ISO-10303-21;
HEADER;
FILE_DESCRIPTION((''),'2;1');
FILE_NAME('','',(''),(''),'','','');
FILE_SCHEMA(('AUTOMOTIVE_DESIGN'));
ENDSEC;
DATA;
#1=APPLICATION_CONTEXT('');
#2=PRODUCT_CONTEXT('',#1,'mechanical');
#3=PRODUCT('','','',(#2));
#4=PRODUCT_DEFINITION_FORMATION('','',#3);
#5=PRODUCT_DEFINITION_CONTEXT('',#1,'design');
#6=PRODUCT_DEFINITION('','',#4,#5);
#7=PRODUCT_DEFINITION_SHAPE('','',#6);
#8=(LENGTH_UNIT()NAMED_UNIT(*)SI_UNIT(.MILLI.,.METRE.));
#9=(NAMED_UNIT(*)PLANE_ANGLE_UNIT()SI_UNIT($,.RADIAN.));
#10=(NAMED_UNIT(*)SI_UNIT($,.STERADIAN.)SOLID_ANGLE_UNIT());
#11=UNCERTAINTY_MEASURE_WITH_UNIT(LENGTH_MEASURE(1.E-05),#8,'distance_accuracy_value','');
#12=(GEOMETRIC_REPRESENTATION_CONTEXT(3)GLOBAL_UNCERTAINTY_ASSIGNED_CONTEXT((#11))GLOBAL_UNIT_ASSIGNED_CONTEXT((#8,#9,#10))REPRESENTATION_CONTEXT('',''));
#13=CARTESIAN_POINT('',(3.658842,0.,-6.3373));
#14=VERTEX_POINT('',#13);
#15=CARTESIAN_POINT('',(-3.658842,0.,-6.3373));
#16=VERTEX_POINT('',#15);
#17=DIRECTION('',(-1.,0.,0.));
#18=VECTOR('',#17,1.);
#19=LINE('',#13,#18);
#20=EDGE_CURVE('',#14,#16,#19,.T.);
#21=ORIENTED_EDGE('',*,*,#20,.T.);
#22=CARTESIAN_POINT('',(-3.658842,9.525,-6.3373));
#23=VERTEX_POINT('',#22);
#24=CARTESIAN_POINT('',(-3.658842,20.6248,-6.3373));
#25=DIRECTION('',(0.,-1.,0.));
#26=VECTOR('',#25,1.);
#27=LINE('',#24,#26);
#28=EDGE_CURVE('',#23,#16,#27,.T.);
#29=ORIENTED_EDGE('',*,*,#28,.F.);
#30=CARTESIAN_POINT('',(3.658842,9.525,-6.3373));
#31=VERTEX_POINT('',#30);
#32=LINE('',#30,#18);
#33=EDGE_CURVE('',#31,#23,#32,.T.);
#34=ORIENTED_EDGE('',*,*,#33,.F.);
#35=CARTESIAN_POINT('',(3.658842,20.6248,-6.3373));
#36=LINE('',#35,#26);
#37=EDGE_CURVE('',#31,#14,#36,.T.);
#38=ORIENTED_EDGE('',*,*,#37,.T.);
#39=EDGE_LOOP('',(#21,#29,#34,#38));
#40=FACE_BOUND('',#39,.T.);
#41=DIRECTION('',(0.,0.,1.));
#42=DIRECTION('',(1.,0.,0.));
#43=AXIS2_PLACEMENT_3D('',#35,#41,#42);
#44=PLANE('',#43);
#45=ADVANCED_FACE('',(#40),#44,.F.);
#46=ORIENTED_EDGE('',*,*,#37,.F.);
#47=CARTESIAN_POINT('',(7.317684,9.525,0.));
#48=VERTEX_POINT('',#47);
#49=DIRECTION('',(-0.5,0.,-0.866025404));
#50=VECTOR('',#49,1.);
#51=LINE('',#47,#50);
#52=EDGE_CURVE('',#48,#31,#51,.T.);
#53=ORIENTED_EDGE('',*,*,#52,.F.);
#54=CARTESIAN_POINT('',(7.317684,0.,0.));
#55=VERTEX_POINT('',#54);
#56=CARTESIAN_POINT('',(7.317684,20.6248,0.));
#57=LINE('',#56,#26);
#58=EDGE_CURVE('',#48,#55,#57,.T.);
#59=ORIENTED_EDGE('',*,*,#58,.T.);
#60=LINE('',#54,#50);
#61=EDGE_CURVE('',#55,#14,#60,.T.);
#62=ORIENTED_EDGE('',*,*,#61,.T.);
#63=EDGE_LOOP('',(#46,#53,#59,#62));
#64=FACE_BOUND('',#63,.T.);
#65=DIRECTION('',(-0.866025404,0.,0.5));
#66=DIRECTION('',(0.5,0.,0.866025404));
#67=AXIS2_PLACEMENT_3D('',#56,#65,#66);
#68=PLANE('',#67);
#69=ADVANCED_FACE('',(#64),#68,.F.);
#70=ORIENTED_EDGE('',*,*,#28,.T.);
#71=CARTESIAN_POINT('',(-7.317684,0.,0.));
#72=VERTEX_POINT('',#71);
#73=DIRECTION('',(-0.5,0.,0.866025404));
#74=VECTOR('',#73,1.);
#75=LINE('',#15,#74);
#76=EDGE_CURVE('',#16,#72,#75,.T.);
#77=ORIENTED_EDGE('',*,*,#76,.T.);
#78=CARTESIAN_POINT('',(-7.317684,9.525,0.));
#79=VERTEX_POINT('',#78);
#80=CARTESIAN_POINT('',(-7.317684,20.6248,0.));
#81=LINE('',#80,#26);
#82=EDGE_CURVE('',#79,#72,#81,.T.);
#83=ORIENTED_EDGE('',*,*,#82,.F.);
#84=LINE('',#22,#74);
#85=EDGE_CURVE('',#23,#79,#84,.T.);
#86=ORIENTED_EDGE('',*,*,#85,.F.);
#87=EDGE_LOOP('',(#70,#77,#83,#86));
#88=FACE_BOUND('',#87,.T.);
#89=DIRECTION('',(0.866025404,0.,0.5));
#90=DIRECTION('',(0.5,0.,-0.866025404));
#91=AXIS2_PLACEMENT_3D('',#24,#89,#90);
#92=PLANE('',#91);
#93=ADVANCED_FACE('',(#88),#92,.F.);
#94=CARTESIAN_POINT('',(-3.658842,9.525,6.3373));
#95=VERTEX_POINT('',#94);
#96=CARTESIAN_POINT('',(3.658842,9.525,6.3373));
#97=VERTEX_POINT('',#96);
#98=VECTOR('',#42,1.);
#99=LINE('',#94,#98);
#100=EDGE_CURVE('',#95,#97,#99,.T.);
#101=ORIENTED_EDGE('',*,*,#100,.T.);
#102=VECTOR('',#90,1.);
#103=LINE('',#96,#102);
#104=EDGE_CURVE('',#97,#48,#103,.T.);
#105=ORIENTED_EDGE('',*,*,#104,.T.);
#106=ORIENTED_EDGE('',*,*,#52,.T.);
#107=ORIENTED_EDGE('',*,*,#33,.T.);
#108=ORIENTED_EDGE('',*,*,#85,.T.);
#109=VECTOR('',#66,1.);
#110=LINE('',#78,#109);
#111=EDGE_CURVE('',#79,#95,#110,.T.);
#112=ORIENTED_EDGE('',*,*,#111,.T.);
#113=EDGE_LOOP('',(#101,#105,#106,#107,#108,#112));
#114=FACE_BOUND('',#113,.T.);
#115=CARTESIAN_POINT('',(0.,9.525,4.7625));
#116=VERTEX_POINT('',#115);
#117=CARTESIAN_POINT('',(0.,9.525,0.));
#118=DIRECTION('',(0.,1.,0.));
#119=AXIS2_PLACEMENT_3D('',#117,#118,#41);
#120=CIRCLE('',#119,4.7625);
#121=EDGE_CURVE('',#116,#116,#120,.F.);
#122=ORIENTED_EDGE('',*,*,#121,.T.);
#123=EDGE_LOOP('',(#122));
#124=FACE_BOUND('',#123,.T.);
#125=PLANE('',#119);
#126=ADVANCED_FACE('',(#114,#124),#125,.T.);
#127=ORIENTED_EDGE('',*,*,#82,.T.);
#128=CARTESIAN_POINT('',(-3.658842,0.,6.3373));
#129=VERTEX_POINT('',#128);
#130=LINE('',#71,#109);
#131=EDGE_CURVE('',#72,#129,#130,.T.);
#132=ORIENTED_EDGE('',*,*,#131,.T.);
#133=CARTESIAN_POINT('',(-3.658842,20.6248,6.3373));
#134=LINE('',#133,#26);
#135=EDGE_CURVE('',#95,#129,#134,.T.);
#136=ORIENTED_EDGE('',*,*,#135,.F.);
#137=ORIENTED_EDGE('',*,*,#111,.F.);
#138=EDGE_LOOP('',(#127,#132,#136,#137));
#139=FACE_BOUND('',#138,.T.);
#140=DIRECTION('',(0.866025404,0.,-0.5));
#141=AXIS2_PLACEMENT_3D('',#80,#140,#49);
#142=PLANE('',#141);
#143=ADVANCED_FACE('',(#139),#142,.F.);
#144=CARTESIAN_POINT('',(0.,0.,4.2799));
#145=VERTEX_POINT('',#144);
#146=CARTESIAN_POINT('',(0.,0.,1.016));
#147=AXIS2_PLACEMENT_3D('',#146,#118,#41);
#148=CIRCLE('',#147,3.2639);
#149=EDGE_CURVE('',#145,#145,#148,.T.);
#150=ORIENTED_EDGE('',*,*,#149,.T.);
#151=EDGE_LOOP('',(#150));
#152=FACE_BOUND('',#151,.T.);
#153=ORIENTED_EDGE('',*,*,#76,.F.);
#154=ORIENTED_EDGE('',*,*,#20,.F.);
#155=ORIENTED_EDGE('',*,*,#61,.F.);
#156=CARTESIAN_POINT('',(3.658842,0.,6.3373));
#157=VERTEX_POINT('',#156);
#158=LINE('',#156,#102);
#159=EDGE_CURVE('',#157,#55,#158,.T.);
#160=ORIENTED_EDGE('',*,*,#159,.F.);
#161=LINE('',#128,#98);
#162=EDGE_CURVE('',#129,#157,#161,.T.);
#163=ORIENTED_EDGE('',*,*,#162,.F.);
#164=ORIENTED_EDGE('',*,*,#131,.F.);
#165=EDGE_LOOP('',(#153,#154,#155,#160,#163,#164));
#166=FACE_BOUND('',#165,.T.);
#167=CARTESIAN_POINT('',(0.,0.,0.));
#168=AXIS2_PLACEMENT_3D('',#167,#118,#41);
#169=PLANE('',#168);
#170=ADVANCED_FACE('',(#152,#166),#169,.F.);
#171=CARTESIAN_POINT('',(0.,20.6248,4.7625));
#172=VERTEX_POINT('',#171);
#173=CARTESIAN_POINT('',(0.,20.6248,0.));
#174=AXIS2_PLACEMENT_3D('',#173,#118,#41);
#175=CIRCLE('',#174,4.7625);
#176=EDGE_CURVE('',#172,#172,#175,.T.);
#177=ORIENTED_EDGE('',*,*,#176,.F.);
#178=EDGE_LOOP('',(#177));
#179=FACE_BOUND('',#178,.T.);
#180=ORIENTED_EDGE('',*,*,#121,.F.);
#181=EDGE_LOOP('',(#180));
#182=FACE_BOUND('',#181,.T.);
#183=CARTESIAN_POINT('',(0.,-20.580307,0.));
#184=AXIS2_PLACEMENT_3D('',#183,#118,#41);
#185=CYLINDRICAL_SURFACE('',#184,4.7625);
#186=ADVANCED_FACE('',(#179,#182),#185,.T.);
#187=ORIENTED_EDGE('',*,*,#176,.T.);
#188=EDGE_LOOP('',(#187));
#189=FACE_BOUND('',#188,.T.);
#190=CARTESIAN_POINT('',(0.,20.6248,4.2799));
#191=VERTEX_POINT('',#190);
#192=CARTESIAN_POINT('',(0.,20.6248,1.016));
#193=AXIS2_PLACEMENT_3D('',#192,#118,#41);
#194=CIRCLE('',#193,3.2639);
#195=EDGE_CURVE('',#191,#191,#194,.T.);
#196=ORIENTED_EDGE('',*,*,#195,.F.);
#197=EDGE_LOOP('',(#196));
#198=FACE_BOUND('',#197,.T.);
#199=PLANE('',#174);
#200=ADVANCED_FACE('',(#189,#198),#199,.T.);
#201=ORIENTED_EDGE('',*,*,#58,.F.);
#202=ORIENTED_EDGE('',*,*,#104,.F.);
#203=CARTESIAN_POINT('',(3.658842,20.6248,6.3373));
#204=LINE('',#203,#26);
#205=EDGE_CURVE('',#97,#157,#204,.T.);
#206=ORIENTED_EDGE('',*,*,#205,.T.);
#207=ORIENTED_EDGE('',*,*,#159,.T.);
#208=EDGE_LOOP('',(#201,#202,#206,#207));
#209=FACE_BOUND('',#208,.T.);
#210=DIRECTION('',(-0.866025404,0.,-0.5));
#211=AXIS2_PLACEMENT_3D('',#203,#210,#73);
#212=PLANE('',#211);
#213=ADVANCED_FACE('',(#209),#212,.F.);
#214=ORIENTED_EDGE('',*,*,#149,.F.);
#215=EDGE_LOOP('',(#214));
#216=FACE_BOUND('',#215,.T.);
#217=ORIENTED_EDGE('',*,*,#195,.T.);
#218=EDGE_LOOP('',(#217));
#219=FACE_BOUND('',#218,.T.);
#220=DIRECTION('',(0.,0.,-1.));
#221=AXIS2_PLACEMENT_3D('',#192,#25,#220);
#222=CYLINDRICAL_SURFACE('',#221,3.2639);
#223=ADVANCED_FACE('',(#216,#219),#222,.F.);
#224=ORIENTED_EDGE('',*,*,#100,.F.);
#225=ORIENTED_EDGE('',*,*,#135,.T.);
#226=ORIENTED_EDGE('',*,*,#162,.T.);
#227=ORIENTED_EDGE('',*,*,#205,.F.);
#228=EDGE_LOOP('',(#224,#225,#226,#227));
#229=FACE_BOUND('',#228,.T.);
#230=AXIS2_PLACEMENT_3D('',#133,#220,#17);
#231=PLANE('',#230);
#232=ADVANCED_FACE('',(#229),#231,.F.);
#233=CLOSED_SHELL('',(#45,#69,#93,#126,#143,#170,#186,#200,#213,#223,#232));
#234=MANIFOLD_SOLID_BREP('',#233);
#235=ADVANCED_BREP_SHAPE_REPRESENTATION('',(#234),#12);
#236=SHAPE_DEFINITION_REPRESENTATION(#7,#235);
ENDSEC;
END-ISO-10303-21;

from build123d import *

# Parameters (mm, degrees)
BOSS_EXTRUDE1_OUTLINE_R = 3.2639
BOSS_EXTRUDE1_DEPTH     = 20.6248
SKETCH2_OUTSIDE_W       = 22.294
SKETCH2_OUTSIDE_H       = 20.332
SKETCH2_OUTSIDE_R       = 4.7625
CUT_EXTRUDE2_DEPTH      = 11.0998


# Read off the part's stored shape, not the designer's step: Boss-Extrude1
with BuildPart() as part:
    # Boss-Extrude1 outline → Boss-Extrude1 (new body)
    with BuildSketch(Plane(origin=(0, 0, 0), x_dir=(1, 0, 0), z_dir=(0, 1, 0))):
        Polygon((3.658841861, -6.3373), (7.317683722, 0), (3.658841861, 6.3373), (-3.658841861, 6.3373), (-7.317683722, 0), (-3.658841861, -6.3373), align=None)
        with Locations((0, -1.016)):
            Circle(BOSS_EXTRUDE1_OUTLINE_R, mode=Mode.SUBTRACT)
    extrude(amount=BOSS_EXTRUDE1_DEPTH)

    # Sketch2 outside → Cut-Extrude2 (cut)
    with BuildSketch(Plane(origin=(0, 20.6248, 0), x_dir=(1, 0, 0), z_dir=(0, 1, 0))):
        Rectangle(SKETCH2_OUTSIDE_W, SKETCH2_OUTSIDE_H)
        with Locations(Location((0, 0, 0), (0, 0, 270))):
            Circle(SKETCH2_OUTSIDE_R, mode=Mode.SUBTRACT)
    extrude(amount=-CUT_EXTRUDE2_DEPTH, mode=Mode.SUBTRACT)


solid = part.part
